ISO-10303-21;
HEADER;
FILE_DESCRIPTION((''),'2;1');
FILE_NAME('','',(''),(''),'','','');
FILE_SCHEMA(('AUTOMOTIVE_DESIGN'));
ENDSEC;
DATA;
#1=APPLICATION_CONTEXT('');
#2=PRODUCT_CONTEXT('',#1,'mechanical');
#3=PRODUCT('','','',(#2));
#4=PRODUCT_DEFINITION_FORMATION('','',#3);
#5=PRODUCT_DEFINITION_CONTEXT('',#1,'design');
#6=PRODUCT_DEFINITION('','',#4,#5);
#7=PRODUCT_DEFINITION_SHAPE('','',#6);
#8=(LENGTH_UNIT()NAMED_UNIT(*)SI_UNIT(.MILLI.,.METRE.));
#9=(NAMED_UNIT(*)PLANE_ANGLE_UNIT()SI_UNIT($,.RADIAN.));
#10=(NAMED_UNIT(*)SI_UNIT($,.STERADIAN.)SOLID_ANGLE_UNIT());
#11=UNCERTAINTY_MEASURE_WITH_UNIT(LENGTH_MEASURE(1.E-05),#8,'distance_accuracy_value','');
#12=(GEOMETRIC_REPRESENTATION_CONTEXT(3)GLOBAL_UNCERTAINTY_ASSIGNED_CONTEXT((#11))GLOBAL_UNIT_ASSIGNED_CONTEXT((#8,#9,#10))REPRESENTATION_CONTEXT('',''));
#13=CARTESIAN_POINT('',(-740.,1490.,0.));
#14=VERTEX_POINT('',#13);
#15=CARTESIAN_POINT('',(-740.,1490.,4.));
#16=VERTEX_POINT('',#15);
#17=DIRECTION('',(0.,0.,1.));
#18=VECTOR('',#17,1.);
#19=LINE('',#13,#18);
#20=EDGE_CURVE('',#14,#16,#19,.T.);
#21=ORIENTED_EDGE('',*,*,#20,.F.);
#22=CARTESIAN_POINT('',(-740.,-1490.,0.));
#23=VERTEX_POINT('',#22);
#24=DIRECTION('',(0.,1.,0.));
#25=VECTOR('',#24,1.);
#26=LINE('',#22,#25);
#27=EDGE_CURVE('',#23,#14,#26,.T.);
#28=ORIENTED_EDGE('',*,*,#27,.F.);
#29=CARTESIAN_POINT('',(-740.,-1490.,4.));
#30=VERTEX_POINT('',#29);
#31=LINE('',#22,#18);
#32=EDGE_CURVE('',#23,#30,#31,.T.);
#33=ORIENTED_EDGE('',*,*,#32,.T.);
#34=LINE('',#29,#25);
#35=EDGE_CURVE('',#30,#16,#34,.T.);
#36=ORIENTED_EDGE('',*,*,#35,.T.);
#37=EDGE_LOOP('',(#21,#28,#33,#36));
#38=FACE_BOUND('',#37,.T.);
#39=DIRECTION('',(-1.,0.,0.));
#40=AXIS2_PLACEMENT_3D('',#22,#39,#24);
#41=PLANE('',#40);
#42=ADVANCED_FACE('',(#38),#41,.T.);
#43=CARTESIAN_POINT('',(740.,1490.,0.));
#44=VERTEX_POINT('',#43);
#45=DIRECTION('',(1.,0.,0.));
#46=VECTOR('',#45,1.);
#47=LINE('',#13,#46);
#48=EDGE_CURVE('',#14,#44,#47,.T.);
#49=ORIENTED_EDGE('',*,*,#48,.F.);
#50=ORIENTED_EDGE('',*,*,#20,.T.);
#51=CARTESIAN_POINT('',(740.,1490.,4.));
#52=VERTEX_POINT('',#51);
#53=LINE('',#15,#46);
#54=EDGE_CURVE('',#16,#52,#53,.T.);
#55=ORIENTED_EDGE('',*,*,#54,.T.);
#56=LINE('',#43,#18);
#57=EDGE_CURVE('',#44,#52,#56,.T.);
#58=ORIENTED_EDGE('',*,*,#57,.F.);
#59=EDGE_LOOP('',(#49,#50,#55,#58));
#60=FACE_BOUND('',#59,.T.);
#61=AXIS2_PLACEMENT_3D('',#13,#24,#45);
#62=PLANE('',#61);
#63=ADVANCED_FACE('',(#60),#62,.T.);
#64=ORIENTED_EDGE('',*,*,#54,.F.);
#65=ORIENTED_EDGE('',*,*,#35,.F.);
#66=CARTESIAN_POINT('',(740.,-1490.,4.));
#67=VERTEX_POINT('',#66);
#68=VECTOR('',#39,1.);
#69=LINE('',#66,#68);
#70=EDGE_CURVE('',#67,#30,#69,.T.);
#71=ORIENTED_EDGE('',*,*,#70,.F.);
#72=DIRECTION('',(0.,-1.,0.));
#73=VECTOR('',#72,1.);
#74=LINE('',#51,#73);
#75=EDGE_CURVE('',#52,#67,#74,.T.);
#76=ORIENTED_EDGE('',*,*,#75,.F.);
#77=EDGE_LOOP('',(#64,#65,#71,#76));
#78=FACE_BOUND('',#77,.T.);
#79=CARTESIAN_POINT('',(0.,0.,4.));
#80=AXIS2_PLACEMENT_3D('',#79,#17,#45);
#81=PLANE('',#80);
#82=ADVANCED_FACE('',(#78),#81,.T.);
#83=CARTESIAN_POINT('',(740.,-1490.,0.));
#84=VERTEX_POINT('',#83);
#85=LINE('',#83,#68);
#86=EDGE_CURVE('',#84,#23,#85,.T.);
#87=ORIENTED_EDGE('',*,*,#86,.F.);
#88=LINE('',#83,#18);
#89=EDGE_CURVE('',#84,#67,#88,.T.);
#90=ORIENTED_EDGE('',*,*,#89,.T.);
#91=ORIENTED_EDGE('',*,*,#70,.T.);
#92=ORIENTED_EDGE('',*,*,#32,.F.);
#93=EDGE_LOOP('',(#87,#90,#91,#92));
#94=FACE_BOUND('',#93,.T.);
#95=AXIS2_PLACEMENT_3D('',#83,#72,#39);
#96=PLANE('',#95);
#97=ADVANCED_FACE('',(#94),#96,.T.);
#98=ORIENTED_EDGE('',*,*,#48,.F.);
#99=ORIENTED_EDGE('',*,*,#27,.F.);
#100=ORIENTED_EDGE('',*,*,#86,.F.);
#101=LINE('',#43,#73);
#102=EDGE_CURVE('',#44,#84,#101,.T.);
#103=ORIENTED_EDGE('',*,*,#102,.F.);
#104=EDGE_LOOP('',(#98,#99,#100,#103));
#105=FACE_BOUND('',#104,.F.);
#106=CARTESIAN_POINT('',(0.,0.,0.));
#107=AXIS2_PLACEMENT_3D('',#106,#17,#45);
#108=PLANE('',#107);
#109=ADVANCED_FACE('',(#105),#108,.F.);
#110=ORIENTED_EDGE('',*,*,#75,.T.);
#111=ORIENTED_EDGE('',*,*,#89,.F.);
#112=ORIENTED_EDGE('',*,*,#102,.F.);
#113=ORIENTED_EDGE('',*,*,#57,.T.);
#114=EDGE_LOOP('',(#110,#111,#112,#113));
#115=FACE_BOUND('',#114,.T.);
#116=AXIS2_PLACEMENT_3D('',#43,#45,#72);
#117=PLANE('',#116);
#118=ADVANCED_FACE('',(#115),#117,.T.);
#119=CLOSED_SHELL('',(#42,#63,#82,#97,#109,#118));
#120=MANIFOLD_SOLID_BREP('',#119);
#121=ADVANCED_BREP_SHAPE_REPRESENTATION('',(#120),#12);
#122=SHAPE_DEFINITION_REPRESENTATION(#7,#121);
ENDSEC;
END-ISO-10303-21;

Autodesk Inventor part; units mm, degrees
ref_plane "YZ Plane" through (0, 0, 0) normal (1, 0, 0) x (0, 1, 0)
ref_plane "XZ Plane" through (0, 0, 0) normal (0, 1, 0) x (-1, 0, 0)
ref_plane "XY Plane" through (0, 0, 0) normal (0, 0, 1) x (1, 0, 0)
sketch "Sketch1" plane through (0, 0, 0) normal (0, 0, 1) x (1, 0, 0)
  line L0 (740, -1490) -> (-740, -1490)
  line L1 (-740, -1490) -> (-740, 1490)
  line L2 (-740, 1490) -> (740, 1490)
  line L3 (740, 1490) -> (740, -1490)
  line L4 (740, -1490) -> (-740, 1490) construction
  line L5 (-740, -1490) -> (740, 1490) construction
  point P0 (0, 0)
  dimension "d0" = 1480
  dimension "d1" = 2980
extrude "Plate2" add sketch "Sketch1" along normal blind 4
sketch "Sketch4" plane through (0, 0, 4) normal (0, 0, 1) x (1, 0, 0)
  line L0 (528.5199, -1299.683) -> (528.5199, -1657.3735) construction
  line L1 (528.5199, -1657.3735) -> (497.2557, -1657.3735) construction
  line L2 (497.2557, -1657.3735) -> (497.2557, -1299.683) construction
  line L3 (497.2557, -1299.683) -> (528.5199, -1299.683) construction
  line L4 (669.8628, -1238) -> (669.8628, -1335) projected
  line L5 (669.8628, -1335) -> (665.8638, -1335) projected
  line L6 (169.7342, -1238) -> (169.7342, -1335) projected
  line L7 (169.7342, -1335) -> (165.7352, -1335) projected
  line L8 (-330.3944, -1238) -> (-330.3944, -1335) projected
  line L9 (-330.3944, -1335) -> (-334.3934, -1335) projected
  ellipse E0 centre (-330.3944, 1490.5) end of major axis (-330.3944, 1520.5) minor radius 0.6803 (-330.3944, 1460.5) -> (-330.3944, 1520.5) ccw projected
  line L10 (-330.3944, 1460.5) -> (-334.3934, 1460.5) projected
  ellipse E1 centre (169.7342, 1490.5) end of major axis (169.7342, 1520.5) minor radius 0.6803 (169.7342, 1460.5) -> (169.7342, 1520.5) ccw projected
  line L11 (169.7342, 1460.5) -> (165.7352, 1460.5) projected
  ellipse E2 centre (669.8628, 1490.5) end of major axis (669.8628, 1520.5) minor radius 0.6803 (669.8628, 1460.5) -> (669.8628, 1520.5) ccw projected
  line L12 (669.8628, 1460.5) -> (665.8638, 1460.5) projected
  line L13 (710, -1234.5) -> (770, -1234.5) projected
  line L14 (710, -1234.5) -> (710, -1230.5) projected
  line L15 (710, -737.8333) -> (770, -737.8333) projected
  line L16 (710, -737.8333) -> (710, -733.8333) projected
  line L17 (710, -241.1667) -> (770, -241.1667) projected
  line L18 (710, -241.1667) -> (710, -237.1667) projected
  line L19 (710, 255.5) -> (770, 255.5) projected
  line L20 (710, 255.5) -> (710, 259.5) projected
  line L21 (710, 752.1667) -> (770, 752.1667) projected
  line L22 (710, 752.1667) -> (710, 756.1667) projected
  line L23 (710, 1248.8333) -> (770, 1248.8333) projected
  line L24 (710, 1248.8333) -> (710, 1252.8333) projected
  line L25 (-738.6395, -1234.5) -> (-680, -1234.5) projected
  line L26 (-680, -1234.5) -> (-680, -1230.5) projected
  line L27 (-738.6395, -737.8333) -> (-680, -737.8333) projected
  line L28 (-680, -737.8333) -> (-680, -733.8333) projected
  line L29 (-738.6395, -241.1667) -> (-680, -241.1667) projected
  line L30 (-680, -241.1667) -> (-680, -237.1667) projected
  line L31 (-738.6395, 255.5) -> (-680, 255.5) projected
  line L32 (-680, 255.5) -> (-680, 259.5) projected
  line L33 (-738.6395, 752.1667) -> (-680, 752.1667) projected
  line L34 (-680, 752.1667) -> (-680, 756.1667) projected
  line L35 (-738.6395, 1248.8333) -> (-680, 1248.8333) projected
  line L36 (-680, 1248.8333) -> (-680, 1252.8333) projected
mark "Mark2"
equation "\"d0\" = Лист_ширина"
equation "\"BendRadius\" = Thickness"
equation "\"d3\" = Thickness"
equation "\"BendReliefWidth\" = Thickness"
equation "\"BendReliefDepth\" = 0.5 * Thickness"
equation "\"CornerReliefSize\" = 4 * Thickness"
equation "\"MinimumRemnant\" = 2 * Thickness"
equation "\"TransitionRadius\" = BendRadius"
equation "\"JacobiRadiusSize\" = BendRadius"
equation "\"GapSize\" = Thickness"
equation "\"Лист_ширина\" = 1480"
equation "\"Thickness\" = 4"
properties part number "GBK 1126 shield 1.2" material "Steel"
